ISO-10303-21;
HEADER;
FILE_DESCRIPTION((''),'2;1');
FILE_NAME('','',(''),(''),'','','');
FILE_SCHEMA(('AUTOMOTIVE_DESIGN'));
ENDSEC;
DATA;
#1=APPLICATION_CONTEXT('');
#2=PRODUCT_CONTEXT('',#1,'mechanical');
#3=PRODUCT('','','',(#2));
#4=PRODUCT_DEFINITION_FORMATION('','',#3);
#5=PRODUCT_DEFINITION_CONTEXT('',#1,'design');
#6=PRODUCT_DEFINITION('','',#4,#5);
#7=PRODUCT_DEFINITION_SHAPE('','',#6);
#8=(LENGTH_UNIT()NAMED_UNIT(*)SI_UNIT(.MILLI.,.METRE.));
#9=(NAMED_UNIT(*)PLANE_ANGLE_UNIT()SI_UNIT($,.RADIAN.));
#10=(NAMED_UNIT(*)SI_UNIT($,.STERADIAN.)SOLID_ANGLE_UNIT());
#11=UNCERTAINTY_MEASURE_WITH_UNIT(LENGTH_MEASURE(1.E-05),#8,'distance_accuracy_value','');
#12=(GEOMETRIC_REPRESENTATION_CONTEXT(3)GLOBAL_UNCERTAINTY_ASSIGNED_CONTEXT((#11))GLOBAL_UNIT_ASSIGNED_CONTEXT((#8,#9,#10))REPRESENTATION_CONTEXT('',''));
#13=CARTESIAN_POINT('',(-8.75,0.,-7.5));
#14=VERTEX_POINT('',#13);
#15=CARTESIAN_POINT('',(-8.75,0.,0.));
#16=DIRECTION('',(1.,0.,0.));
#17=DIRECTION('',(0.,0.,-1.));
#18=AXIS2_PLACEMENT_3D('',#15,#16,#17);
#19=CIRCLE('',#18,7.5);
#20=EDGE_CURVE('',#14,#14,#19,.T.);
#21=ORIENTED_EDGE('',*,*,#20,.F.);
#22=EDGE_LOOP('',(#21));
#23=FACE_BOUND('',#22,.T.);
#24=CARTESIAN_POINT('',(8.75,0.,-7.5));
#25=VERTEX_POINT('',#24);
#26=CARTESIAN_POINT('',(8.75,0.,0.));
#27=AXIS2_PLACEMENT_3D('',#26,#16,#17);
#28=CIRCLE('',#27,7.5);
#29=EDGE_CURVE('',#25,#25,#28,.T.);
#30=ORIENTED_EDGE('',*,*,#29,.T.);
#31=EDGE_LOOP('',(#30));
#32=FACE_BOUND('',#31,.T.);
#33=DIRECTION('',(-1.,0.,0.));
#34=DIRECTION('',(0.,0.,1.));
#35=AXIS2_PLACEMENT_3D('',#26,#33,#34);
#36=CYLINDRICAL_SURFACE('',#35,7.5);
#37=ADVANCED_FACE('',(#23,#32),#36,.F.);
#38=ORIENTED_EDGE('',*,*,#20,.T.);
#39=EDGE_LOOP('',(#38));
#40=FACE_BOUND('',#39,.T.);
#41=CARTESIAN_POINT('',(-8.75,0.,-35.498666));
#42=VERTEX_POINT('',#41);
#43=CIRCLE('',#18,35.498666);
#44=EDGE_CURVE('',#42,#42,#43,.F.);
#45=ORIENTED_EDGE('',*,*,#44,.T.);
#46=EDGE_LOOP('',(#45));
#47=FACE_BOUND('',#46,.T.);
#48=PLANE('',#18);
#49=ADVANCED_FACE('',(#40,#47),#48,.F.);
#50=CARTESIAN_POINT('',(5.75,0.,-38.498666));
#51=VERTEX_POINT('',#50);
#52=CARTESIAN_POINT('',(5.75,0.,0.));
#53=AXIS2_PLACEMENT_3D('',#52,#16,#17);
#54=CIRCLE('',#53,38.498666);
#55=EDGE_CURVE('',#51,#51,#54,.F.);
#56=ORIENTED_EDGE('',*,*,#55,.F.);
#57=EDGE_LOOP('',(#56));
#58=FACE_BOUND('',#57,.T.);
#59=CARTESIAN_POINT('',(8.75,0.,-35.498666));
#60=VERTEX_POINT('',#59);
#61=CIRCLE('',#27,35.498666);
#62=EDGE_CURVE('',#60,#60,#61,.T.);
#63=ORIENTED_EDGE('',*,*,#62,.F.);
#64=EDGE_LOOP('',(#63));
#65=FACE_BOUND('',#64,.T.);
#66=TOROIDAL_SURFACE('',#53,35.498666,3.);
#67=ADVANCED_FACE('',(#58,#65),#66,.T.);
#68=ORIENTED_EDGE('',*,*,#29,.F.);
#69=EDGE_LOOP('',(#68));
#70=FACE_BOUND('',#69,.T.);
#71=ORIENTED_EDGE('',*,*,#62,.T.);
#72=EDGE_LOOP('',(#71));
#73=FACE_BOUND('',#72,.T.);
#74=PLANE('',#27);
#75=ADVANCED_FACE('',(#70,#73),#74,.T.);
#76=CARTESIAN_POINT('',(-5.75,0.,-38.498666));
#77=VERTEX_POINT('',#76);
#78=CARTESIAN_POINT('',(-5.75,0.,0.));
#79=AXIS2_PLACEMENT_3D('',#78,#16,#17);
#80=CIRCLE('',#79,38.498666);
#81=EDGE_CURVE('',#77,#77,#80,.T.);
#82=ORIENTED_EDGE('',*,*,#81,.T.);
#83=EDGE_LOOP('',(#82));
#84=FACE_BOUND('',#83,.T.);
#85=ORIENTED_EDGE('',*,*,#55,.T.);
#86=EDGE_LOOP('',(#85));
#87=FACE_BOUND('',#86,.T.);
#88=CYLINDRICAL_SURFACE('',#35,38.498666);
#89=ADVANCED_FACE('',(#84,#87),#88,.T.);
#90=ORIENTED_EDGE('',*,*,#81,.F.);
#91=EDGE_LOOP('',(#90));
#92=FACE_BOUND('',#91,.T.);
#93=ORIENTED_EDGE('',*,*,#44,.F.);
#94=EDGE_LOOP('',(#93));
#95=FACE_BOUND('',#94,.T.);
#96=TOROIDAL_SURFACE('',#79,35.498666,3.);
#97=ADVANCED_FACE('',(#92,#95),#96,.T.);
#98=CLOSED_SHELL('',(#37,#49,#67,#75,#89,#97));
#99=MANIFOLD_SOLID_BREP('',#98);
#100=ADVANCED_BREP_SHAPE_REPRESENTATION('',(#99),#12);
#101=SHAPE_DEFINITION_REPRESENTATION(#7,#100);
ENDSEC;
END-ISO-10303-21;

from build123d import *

# Parameters (mm, degrees)
BOSS_EXTRUDE1_START       = -8.75
BOSS_EXTRUDE1_OUTLINE_R   = 38.498666077
BOSS_EXTRUDE1_OUTLINE_R_2 = 7.5
BOSS_EXTRUDE1_DEPTH       = 17.5
FILLET1_R                 = 3


# Read off the part's stored shape, not the designer's step: Boss-Extrude1
with BuildPart() as part:
    # Boss-Extrude1 outline → Boss-Extrude1 (new body)
    with BuildSketch(Plane.YZ.offset(BOSS_EXTRUDE1_START)):
        Circle(BOSS_EXTRUDE1_OUTLINE_R)
        Circle(BOSS_EXTRUDE1_OUTLINE_R_2, mode=Mode.SUBTRACT)
    extrude(amount=BOSS_EXTRUDE1_DEPTH)

    # Fillet1
    fillet1_edges = [part.edges().sort_by_distance(p)[0] for p in [
        (-8.75, -38.498666077, 0),
        (8.75, -38.498666077, 0),
    ]]
    fillet(fillet1_edges, radius=FILLET1_R)


solid = part.part
